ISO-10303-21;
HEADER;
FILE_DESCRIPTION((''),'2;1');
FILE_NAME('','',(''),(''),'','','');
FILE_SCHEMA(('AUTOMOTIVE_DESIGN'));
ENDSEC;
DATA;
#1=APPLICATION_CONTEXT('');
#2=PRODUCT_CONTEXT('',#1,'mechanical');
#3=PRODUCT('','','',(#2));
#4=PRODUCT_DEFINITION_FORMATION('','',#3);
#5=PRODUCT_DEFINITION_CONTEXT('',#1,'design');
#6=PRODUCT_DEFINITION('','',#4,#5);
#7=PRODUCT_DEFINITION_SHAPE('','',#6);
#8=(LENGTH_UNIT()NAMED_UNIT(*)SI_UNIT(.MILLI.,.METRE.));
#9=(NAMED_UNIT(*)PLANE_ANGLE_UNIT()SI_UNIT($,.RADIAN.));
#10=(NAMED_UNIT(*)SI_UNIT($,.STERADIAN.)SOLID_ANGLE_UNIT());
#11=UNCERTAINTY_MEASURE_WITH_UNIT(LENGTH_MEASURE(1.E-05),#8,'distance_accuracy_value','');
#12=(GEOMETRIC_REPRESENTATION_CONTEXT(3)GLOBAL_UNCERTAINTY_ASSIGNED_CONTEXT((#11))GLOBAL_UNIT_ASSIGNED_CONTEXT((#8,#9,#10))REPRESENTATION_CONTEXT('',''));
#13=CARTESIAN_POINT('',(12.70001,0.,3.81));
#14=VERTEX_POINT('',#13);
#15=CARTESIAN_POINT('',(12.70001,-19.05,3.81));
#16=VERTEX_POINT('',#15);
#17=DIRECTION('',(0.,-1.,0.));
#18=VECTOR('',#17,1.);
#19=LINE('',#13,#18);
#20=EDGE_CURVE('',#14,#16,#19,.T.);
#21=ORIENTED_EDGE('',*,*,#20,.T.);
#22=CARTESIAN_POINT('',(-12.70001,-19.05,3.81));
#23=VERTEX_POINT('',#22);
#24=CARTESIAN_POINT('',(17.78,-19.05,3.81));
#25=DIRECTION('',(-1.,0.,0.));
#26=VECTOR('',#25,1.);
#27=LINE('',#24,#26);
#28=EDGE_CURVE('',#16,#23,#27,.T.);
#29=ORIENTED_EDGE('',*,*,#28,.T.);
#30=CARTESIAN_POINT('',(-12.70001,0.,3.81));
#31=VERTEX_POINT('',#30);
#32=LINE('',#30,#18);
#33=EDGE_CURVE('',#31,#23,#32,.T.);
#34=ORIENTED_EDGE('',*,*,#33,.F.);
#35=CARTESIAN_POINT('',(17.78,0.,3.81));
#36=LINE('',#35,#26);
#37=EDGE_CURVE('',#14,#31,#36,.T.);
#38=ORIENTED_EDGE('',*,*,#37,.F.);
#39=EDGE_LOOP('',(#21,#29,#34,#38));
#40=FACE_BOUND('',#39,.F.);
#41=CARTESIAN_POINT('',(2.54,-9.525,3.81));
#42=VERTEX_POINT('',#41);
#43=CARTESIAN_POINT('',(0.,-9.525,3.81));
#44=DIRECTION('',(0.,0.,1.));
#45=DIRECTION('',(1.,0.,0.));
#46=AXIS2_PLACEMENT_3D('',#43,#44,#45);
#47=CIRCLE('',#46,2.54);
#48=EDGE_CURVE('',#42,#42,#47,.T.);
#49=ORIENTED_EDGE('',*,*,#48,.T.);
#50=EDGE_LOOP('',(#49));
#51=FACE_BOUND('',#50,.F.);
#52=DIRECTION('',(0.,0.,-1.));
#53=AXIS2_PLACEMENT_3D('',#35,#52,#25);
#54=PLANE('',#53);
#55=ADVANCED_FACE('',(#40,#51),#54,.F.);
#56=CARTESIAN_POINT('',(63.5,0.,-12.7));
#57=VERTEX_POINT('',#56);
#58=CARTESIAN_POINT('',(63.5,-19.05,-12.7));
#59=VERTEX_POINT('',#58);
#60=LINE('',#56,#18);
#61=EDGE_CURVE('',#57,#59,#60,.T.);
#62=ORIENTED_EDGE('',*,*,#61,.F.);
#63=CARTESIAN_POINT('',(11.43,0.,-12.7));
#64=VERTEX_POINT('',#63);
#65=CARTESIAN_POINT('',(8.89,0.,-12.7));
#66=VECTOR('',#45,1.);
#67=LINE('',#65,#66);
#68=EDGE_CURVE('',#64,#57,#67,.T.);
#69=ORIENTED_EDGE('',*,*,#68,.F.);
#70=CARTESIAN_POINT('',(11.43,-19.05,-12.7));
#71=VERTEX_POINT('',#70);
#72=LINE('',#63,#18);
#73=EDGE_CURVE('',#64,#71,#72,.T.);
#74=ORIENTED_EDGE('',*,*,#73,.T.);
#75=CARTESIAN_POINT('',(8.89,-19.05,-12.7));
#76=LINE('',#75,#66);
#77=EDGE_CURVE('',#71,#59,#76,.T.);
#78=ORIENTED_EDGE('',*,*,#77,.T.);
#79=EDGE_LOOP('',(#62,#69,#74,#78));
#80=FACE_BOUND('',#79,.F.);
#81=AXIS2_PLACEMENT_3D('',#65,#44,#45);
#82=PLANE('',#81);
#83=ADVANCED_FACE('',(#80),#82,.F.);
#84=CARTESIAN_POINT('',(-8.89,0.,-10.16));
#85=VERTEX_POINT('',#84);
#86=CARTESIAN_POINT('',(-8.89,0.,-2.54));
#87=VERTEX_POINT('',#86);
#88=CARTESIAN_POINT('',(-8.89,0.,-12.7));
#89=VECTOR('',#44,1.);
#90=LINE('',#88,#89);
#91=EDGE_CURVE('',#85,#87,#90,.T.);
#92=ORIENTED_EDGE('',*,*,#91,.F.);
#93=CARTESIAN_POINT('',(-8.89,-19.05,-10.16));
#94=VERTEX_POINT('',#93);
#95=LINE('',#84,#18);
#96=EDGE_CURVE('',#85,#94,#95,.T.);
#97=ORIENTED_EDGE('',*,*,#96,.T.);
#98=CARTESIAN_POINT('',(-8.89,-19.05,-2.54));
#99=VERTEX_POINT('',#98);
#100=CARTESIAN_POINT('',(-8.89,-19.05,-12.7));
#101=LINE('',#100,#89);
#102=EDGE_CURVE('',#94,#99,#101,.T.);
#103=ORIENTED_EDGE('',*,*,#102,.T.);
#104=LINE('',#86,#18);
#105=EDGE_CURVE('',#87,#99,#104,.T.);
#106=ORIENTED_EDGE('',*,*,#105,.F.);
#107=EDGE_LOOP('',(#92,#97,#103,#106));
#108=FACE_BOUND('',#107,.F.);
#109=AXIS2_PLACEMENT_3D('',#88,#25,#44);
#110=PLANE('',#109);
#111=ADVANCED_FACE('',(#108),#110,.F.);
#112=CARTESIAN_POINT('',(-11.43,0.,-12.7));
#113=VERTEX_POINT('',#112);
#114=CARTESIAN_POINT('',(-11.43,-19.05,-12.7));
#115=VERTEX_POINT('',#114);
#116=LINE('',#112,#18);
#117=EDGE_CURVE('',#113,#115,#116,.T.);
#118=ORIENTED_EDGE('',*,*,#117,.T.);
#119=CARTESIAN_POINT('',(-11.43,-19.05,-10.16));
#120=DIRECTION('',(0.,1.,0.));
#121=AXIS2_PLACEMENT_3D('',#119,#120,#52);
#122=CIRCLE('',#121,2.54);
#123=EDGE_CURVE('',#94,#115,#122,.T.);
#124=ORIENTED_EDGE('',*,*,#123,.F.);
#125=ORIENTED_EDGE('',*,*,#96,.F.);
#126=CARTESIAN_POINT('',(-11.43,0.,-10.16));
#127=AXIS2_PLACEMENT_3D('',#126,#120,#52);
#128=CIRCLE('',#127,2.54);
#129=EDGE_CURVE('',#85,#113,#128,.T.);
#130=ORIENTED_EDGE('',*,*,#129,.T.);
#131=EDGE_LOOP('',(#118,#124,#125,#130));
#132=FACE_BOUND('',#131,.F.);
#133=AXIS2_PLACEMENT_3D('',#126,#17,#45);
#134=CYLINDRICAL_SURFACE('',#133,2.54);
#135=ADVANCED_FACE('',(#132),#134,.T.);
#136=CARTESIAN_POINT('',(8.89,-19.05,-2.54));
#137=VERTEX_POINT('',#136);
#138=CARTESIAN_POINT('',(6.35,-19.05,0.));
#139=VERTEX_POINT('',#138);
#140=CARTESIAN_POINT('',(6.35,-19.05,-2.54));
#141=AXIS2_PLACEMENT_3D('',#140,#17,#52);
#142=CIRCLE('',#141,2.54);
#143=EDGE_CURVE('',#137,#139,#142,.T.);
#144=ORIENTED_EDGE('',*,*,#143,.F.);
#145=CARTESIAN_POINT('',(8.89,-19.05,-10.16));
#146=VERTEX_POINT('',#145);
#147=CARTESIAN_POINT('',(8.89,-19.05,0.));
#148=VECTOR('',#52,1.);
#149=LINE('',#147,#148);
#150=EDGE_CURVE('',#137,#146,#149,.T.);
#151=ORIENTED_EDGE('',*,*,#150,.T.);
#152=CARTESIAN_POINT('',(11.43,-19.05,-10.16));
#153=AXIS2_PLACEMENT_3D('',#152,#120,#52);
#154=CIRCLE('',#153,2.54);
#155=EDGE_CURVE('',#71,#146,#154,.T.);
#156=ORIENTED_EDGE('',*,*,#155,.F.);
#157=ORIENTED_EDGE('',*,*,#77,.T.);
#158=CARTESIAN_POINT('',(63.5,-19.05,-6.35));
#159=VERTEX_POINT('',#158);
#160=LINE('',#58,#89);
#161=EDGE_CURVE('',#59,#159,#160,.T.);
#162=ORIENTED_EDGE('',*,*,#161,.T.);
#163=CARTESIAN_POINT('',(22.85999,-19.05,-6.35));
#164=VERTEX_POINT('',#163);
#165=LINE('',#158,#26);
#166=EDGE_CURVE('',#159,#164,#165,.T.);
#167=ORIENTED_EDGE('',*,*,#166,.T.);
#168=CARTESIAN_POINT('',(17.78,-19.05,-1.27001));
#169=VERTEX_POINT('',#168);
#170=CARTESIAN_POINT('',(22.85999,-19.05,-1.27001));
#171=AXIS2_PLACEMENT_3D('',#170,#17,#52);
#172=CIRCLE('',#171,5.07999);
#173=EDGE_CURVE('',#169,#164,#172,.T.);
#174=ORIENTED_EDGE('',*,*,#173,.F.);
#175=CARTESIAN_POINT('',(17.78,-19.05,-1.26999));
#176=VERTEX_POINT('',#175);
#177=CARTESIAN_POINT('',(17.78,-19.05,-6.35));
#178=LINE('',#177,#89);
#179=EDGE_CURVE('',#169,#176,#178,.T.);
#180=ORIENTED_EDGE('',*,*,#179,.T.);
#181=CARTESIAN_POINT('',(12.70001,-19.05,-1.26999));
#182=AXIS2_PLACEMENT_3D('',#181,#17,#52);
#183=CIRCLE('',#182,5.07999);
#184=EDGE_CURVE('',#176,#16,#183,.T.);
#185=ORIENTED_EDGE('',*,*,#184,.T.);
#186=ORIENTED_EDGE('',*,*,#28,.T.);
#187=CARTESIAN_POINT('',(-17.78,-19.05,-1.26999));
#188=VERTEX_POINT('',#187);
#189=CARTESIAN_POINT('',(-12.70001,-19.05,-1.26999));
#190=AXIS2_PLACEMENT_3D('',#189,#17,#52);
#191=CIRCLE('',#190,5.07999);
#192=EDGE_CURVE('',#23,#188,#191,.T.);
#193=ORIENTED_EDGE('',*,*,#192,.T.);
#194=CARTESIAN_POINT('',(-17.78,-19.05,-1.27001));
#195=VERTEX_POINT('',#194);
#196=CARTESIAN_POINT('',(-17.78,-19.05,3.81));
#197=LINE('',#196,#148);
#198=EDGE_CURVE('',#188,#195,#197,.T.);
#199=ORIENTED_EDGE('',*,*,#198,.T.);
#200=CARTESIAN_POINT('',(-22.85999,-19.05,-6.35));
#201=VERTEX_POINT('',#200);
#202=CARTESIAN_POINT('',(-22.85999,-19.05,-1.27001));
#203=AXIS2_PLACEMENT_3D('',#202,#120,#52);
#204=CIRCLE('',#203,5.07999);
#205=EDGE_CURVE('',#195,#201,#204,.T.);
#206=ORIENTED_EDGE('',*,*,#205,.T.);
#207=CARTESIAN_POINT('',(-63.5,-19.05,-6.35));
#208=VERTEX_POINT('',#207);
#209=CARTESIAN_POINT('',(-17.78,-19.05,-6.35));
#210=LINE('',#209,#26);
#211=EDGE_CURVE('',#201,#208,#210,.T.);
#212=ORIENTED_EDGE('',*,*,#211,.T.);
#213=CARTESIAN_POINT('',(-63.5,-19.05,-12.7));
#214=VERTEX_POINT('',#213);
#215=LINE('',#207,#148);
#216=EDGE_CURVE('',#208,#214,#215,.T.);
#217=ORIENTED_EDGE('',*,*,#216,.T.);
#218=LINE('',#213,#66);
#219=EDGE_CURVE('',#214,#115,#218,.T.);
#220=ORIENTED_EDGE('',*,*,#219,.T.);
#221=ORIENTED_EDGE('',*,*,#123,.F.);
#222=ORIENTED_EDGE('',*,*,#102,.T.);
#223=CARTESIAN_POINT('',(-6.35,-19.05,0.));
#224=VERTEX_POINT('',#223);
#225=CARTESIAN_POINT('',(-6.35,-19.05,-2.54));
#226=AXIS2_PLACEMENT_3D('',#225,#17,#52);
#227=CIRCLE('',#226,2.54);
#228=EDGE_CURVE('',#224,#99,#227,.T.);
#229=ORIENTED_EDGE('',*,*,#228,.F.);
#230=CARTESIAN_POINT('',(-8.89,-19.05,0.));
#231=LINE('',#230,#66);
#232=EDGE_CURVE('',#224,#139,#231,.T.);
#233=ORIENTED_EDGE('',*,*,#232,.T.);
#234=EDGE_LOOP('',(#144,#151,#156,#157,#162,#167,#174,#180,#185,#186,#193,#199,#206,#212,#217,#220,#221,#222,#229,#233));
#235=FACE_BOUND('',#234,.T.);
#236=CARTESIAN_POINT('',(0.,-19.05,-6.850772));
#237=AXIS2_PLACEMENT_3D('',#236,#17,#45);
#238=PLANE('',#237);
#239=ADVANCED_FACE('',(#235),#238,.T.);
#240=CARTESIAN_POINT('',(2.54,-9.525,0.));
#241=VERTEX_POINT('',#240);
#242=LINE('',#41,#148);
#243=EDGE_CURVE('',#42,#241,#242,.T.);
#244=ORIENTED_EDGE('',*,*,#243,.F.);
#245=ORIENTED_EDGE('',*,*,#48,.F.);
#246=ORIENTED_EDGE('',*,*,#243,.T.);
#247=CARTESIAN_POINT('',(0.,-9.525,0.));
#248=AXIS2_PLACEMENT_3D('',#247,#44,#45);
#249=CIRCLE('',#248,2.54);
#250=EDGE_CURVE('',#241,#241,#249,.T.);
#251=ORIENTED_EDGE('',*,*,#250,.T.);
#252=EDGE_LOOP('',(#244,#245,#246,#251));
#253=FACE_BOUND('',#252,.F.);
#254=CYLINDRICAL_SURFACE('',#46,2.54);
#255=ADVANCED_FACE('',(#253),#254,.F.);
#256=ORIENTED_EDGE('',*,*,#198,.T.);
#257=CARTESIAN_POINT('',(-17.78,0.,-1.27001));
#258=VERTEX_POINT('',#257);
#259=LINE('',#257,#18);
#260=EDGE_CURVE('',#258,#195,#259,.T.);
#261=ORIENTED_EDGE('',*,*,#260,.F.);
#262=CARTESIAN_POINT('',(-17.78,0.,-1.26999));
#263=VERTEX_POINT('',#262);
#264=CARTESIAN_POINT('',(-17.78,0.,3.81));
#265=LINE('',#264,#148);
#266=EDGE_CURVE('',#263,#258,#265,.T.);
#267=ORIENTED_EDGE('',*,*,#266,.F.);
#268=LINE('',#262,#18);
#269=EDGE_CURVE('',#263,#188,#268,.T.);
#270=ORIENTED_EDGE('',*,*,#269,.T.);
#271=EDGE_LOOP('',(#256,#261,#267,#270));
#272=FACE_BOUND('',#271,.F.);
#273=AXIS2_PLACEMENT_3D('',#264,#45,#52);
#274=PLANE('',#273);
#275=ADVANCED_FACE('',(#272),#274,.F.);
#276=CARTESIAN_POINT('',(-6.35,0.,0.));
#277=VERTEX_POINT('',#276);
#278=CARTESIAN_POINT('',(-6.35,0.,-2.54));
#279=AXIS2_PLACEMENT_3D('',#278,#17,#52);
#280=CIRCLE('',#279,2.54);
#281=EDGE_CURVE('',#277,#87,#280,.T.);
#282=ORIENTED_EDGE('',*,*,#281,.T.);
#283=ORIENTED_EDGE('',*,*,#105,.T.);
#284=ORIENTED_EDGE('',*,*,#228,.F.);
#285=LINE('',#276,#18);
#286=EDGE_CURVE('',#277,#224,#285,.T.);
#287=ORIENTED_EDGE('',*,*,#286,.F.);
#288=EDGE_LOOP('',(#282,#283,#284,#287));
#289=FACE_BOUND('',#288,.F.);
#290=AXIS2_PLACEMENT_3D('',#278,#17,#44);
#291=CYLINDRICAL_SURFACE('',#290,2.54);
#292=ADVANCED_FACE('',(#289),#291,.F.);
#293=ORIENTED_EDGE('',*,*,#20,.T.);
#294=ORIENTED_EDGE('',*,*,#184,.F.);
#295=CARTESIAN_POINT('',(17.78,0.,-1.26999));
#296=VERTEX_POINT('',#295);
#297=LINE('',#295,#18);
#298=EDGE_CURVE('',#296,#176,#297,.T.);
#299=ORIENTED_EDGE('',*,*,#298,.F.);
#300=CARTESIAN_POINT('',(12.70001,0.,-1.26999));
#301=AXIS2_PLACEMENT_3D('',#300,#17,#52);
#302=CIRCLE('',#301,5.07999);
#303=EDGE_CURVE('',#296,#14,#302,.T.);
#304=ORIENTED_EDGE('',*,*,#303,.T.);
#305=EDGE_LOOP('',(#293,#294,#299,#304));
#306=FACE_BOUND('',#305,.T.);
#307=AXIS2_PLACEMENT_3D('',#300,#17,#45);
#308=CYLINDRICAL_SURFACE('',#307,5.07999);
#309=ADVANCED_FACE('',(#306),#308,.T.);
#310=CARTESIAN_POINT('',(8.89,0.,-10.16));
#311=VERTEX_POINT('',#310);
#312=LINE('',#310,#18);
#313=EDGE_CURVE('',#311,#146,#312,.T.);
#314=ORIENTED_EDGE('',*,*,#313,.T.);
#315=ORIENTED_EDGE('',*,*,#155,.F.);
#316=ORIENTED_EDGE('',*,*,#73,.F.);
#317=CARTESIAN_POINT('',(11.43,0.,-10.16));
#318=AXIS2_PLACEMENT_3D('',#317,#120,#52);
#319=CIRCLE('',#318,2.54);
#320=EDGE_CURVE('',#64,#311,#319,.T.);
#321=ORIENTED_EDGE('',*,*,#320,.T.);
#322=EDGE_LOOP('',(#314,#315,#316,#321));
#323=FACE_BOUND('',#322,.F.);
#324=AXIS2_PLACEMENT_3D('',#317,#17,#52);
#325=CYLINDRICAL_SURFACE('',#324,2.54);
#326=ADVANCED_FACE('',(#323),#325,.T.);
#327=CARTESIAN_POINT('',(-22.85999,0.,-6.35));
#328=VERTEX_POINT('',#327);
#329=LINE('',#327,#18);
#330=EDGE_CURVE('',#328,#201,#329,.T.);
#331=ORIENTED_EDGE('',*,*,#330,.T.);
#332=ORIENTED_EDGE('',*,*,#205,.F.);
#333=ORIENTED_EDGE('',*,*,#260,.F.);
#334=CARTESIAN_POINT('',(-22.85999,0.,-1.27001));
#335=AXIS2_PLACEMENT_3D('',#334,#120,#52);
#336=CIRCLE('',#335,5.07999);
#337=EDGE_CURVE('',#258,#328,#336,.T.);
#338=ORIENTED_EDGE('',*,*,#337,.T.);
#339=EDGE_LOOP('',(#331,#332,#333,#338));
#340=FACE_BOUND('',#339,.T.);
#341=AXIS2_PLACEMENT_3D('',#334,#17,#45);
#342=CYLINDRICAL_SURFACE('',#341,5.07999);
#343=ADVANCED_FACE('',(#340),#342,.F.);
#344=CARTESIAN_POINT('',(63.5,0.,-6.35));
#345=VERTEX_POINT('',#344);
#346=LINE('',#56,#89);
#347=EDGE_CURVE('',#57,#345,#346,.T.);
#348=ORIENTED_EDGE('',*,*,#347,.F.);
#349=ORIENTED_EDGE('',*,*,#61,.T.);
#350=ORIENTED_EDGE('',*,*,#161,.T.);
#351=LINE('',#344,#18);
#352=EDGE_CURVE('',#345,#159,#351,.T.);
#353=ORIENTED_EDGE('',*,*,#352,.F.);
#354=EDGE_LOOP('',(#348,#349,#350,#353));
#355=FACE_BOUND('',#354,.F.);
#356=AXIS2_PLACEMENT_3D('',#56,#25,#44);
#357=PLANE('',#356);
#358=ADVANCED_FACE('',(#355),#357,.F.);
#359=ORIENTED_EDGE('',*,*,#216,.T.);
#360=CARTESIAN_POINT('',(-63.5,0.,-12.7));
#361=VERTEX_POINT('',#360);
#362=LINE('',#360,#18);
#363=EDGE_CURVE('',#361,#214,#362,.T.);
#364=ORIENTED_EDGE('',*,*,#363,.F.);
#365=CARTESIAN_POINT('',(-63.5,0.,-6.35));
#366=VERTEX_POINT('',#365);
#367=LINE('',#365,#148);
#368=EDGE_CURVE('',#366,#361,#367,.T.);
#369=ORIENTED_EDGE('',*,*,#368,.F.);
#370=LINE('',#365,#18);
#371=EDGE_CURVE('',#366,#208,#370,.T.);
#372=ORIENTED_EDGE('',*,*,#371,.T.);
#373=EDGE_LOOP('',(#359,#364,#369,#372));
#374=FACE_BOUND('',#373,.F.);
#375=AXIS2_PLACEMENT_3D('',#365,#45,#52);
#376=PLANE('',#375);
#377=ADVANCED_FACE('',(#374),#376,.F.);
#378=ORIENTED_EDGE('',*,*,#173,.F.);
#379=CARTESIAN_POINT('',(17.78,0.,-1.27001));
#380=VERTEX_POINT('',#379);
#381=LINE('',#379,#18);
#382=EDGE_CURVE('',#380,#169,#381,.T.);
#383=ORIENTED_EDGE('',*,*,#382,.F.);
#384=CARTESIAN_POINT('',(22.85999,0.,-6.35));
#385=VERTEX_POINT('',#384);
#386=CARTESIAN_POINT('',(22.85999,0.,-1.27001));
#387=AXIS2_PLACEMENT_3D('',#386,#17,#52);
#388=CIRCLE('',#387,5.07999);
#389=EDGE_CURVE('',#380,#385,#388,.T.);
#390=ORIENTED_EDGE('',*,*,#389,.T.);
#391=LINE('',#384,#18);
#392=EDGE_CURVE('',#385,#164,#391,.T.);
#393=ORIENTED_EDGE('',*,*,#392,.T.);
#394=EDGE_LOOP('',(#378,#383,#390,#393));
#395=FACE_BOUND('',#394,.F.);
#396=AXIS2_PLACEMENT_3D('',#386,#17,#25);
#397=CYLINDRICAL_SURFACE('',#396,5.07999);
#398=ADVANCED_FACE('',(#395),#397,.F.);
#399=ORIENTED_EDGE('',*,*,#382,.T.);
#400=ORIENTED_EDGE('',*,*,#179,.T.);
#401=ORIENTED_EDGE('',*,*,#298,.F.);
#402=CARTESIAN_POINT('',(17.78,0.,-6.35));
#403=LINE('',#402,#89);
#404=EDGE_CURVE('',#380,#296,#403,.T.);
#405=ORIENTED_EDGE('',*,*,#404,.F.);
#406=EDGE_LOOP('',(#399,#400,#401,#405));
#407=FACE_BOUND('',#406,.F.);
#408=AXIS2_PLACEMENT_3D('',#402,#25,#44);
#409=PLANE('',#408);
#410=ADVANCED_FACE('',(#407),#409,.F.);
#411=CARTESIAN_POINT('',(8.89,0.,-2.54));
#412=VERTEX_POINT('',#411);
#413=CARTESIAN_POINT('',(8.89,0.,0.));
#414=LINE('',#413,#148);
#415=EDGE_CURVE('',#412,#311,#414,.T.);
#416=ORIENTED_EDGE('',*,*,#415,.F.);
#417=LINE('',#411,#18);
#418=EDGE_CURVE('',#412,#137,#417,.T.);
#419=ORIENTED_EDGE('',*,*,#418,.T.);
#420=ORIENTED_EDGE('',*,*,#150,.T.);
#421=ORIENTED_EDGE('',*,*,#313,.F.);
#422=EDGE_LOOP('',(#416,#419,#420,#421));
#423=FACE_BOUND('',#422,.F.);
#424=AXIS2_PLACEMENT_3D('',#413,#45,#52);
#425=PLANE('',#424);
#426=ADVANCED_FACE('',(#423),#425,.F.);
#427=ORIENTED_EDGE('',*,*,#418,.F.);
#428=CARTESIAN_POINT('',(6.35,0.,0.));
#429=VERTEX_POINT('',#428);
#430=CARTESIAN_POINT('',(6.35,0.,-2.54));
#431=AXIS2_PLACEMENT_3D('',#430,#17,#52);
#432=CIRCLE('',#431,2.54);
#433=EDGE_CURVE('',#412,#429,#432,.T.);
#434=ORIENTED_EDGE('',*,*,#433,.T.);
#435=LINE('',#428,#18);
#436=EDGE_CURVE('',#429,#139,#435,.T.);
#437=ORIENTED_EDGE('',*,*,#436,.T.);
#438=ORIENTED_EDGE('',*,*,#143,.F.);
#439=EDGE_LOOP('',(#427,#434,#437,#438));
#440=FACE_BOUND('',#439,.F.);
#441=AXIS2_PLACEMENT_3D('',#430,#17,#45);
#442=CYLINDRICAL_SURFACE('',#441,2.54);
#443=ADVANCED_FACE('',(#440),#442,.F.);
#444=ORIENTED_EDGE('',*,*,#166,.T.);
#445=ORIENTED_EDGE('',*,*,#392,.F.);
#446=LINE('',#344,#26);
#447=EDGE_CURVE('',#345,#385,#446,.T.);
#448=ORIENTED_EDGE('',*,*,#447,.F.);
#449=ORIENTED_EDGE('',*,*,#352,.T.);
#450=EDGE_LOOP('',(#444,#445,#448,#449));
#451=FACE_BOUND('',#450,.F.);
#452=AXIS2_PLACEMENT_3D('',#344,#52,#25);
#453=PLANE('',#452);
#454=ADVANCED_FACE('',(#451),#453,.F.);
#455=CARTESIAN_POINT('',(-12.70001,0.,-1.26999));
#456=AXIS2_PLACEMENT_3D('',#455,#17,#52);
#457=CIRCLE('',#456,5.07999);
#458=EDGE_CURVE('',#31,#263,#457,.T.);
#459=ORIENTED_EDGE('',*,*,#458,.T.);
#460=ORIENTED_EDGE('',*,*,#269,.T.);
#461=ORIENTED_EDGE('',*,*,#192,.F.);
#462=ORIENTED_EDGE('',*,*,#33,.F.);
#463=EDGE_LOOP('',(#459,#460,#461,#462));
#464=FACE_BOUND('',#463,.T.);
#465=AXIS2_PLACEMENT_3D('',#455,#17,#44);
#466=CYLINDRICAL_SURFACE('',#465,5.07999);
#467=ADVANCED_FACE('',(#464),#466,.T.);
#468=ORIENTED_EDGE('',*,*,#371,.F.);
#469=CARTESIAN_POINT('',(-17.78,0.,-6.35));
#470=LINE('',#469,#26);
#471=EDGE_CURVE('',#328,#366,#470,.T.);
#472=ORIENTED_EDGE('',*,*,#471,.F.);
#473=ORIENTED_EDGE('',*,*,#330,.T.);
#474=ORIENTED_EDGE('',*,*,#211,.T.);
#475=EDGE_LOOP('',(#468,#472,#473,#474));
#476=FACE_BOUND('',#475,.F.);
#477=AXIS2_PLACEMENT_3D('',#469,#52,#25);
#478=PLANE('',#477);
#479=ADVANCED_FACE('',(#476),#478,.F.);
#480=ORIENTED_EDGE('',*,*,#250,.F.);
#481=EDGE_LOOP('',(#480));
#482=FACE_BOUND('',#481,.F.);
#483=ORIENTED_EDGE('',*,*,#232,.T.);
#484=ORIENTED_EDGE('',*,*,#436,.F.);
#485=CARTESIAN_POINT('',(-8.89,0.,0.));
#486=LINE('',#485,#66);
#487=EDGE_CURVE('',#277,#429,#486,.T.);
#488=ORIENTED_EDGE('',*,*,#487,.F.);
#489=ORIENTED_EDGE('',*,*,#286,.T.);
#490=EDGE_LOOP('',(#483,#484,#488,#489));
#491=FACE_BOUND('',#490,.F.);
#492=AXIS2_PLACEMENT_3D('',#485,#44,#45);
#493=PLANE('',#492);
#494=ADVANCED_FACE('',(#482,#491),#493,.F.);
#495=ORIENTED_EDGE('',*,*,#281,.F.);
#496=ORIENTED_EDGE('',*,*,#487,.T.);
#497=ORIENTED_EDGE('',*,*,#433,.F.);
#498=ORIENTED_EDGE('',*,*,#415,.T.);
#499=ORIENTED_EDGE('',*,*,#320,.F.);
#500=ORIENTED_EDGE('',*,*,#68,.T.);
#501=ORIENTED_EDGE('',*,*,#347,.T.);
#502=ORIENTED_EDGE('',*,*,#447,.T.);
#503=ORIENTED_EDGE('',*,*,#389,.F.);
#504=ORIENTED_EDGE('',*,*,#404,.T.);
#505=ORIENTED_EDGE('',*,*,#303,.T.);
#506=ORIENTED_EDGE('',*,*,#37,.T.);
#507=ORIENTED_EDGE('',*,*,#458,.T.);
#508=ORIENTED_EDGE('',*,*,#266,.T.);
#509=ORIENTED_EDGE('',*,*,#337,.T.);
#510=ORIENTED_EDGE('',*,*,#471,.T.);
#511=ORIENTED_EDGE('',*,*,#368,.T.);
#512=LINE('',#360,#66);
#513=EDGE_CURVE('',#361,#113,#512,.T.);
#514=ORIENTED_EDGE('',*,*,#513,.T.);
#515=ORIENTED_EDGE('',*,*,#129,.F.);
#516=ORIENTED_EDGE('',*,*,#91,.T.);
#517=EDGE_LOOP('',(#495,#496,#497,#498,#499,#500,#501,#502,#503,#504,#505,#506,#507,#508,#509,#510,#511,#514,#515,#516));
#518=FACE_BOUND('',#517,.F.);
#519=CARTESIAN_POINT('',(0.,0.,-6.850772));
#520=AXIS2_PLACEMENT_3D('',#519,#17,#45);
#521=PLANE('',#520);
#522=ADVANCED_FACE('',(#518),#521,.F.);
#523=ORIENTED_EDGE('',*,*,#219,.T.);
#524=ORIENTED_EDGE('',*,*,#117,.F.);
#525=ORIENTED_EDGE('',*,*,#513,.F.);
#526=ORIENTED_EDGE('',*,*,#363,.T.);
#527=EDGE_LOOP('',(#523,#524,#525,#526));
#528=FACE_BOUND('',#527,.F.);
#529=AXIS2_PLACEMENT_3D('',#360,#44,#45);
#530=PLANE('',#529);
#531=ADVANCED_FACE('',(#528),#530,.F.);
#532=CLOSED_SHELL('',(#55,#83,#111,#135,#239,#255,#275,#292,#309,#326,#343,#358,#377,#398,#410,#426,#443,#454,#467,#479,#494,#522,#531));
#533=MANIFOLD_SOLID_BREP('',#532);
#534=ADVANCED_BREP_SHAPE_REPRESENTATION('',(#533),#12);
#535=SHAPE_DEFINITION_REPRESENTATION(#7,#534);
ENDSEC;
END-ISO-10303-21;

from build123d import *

# Parameters (mm, degrees)
F1_DEPTH = 19.05
F2_R     = 5.07999
F3_R     = 2.54
F4_DEPTH = 25.4
F5_R     = 2.54


# Not quite as in the source:
# - a fillet or chamfer is up to 0.001 mm smaller than in the source, because OpenCascade refuses the exact size


with BuildPart() as f1:
    # F0 (on Front) → F1 (new body)
    with BuildSketch(Plane.XZ):
        Polygon((17.78, -6.35), (17.78, 3.81), (-17.78, 3.81), (-17.78, -6.35), (-63.5, -6.35), (-63.5, -12.7), (-8.89, -12.7), (-8.89, 0), (8.89, 0), (8.89, -12.7), (63.5, -12.7), (63.5, -6.35), align=None)
    extrude(amount=F1_DEPTH)

    # F2 (radius 5.08 in the source; OpenCascade refuses exactly that, so slightly less here)
    f2_edges = [f1.edges().sort_by_distance(p)[0] for p in [
        (17.78, -9.525, 3.81),
        (17.78, -9.525, -6.35),
        (-17.78, -9.525, 3.81),
        (-17.78, -9.525, -6.35),
    ]]
    fillet(f2_edges, radius=F2_R)

    # F3 (on face) → F4 (cut)
    with BuildSketch(Plane.XY.offset(3.81)):
        with Locations((0, -9.525)):
            Circle(F3_R)
    extrude(amount=-F4_DEPTH, mode=Mode.SUBTRACT)

    # F5
    f5_edges = [f1.edges().sort_by_distance(p)[0] for p in [
        (8.89, -9.525, 0),
        (-8.89, -9.525, 0),
        (-8.89, -9.525, -12.7),
        (8.89, -9.525, -12.7),
    ]]
    fillet(f5_edges, radius=F5_R)


solid = f1.part
